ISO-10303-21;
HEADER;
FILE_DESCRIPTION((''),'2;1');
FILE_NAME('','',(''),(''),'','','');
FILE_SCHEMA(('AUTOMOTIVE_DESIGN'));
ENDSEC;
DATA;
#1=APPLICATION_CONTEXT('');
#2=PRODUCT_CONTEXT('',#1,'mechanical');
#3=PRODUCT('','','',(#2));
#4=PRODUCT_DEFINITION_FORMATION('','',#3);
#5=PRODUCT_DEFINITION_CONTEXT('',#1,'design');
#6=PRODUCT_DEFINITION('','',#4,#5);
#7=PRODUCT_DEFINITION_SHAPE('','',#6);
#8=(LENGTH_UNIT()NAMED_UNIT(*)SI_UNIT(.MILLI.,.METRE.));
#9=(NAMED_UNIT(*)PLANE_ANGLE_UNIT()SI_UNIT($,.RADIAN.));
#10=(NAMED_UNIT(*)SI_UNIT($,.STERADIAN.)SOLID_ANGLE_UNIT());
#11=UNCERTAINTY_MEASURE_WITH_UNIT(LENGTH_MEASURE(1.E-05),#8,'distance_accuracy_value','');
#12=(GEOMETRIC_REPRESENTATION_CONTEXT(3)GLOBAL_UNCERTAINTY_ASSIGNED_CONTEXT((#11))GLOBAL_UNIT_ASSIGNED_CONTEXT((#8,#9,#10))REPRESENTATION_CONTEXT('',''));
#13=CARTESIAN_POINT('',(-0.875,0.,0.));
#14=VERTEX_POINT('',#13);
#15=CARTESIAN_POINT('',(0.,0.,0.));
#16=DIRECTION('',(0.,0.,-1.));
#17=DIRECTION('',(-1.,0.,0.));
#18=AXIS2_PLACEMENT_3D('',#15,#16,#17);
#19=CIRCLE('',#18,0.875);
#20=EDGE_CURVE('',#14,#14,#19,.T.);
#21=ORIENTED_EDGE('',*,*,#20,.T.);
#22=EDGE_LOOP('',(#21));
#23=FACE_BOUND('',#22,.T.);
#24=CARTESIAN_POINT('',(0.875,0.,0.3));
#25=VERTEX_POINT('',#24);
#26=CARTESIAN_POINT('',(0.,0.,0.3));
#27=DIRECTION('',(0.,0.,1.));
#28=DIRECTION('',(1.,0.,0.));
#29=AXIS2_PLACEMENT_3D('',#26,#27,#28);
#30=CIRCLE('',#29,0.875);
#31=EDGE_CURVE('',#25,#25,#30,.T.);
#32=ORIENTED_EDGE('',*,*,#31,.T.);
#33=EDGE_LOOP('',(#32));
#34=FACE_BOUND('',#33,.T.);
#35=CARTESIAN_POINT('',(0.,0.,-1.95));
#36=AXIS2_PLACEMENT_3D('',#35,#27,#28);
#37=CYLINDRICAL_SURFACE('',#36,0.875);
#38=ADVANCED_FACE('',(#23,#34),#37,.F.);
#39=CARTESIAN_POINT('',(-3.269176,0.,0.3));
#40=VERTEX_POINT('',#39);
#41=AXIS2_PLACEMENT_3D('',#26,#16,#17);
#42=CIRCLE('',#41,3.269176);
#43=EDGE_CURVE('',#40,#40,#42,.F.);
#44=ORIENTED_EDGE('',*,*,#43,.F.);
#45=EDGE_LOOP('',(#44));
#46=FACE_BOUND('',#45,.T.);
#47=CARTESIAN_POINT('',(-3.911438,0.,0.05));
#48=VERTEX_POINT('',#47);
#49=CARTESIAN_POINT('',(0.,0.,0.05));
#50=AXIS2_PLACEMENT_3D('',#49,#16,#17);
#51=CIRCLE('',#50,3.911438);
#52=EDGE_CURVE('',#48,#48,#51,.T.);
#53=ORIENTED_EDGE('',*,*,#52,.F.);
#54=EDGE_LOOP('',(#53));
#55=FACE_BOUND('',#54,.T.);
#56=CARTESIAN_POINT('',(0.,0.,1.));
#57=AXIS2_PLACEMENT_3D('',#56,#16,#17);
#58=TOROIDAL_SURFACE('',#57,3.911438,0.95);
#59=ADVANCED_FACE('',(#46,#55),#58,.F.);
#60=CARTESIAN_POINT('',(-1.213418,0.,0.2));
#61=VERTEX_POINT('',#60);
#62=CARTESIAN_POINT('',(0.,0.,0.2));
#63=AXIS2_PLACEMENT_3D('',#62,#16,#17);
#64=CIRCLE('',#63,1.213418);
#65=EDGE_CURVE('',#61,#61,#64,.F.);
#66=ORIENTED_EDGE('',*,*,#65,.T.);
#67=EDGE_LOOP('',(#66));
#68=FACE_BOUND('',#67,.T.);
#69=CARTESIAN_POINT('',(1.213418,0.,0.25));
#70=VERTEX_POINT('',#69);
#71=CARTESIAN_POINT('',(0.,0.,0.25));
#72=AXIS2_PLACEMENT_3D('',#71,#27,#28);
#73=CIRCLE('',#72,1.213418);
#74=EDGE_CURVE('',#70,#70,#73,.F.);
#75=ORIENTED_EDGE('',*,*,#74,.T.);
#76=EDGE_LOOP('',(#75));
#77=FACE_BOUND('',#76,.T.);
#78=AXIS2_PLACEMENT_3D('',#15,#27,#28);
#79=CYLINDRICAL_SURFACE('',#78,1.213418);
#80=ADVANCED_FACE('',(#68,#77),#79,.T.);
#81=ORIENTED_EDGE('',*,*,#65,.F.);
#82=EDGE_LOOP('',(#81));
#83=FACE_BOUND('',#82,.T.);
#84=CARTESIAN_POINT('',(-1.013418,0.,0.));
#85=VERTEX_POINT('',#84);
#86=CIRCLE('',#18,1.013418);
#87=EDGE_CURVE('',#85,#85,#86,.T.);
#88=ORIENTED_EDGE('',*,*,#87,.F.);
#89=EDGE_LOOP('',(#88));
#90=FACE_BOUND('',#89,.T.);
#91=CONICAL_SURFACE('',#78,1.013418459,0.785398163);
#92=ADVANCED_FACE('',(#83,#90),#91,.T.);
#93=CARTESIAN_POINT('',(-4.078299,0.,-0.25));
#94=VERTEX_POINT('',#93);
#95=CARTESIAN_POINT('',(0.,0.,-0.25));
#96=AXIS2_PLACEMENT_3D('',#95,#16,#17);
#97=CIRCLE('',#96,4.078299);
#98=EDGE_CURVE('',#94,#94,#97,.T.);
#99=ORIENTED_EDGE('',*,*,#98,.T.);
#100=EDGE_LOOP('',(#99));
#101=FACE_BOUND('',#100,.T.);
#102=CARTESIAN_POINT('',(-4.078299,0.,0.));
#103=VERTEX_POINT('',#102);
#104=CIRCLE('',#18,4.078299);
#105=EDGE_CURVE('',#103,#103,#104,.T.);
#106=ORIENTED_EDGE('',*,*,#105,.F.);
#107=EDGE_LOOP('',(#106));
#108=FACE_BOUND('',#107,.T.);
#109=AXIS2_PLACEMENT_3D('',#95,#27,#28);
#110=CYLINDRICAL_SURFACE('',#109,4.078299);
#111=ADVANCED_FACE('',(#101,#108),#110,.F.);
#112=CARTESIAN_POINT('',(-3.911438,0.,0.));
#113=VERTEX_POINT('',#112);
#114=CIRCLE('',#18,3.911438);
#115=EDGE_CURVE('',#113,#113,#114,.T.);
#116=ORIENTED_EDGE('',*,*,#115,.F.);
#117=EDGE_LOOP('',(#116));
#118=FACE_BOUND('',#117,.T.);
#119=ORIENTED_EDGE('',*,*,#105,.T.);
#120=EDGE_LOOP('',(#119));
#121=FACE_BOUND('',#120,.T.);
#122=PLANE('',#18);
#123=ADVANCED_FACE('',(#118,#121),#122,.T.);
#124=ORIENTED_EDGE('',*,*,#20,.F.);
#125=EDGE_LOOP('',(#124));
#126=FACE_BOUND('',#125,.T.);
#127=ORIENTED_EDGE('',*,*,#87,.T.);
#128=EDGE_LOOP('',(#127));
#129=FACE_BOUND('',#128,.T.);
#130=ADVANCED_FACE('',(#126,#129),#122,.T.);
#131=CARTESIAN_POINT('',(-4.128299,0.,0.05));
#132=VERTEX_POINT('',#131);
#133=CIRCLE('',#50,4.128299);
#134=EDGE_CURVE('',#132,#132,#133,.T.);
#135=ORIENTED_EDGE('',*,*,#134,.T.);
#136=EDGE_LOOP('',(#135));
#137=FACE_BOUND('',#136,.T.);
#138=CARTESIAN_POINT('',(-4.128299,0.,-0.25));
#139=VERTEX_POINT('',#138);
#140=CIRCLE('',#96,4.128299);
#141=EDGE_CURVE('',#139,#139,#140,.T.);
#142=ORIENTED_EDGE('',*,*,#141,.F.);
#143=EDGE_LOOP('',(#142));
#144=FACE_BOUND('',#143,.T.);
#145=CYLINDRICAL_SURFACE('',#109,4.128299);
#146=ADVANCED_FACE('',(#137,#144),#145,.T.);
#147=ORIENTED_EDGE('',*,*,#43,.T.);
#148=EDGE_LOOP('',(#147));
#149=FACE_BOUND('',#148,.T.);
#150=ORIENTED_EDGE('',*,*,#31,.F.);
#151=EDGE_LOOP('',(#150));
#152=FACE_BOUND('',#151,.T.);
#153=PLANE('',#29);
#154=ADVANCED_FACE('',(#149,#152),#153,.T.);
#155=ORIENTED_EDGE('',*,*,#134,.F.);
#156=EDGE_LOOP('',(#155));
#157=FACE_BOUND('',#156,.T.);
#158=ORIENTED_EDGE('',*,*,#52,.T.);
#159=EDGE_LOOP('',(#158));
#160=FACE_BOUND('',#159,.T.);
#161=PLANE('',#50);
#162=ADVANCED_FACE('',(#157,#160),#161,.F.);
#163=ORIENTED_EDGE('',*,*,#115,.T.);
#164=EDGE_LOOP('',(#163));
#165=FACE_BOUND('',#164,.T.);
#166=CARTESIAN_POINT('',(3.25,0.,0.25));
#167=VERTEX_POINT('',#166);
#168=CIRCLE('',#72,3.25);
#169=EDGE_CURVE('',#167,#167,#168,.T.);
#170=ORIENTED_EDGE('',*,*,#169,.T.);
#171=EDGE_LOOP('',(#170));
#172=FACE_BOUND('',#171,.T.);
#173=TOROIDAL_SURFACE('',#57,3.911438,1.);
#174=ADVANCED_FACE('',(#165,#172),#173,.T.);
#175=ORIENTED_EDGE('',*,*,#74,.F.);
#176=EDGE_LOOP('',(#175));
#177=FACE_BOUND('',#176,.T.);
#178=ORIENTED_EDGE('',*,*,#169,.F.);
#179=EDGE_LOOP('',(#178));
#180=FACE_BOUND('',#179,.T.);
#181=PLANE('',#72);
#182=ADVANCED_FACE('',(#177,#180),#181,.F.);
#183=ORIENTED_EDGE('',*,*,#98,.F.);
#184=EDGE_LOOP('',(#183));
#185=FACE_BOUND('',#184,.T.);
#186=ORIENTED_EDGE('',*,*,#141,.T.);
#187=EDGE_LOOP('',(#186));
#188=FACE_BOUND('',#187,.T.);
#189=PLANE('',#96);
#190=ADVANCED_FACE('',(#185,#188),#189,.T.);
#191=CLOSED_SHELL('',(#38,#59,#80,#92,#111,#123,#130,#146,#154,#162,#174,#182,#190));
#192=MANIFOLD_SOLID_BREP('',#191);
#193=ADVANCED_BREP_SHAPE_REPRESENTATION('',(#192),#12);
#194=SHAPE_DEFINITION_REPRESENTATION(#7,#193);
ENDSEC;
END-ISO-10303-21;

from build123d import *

# Parameters (mm, degrees)
SKETCH1_R           = 3.25
SKETCH1_R_2         = 0.875
BOSS_EXTRUDE1_DEPTH = 0.25
SKETCH2_R           = 4.078298916
BOSS_EXTRUDE2_DEPTH = 0.25
FILLET1_R           = 1
SHELL1_T            = 0.05
CUT_EXTRUDE1_START  = -2.25
SKETCH3_R           = 0.875
CUT_EXTRUDE1_DEPTH  = 2.25
BOSS_EXTRUDE3_START = 0.25
SKETCH4_R           = 1.213418459
SKETCH4_R_2         = 0.875
BOSS_EXTRUDE3_DEPTH = 0.25
CHAMFER1_SIZE       = 0.2


with BuildPart() as part:
    # Sketch1 → Boss-Extrude1 (new body)
    with BuildSketch(Plane.XY):
        Circle(SKETCH1_R)
        Circle(SKETCH1_R_2, mode=Mode.SUBTRACT)
    extrude(amount=BOSS_EXTRUDE1_DEPTH)

    # Sketch2 → Boss-Extrude2 (add)
    with BuildSketch(Plane(origin=(0, 0, 0), x_dir=(-1, 0, 0), z_dir=(0, 0, -1))):
        Circle(SKETCH2_R)
    extrude(amount=BOSS_EXTRUDE2_DEPTH)

    # Fillet1
    # the kernel refuses this fillet: 1 mm, written as the material it adds along each edge
    with BuildSketch(Plane(origin=(0, 0, 0), x_dir=(1, 0, 0), z_dir=(0, -1, 0))) as fillet1_piece_1:
        with BuildLine():
            CenterArc((3.911437828, 1), FILLET1_R, 228.590377891, 41.409622109)
            Line((3.25, 0.25), (3.25, 0))
            Line((3.25, 0), (3.911437828, 0))
        make_face()
    revolve(axis=Axis((0, 0, 0), (0, 0, 1)))

    # Shell1
    shell1_openings = [part.faces().sort_by_distance(p)[0] for p in [
        (0, 0, -0.25),
    ]]
    offset(amount=SHELL1_T, openings=shell1_openings, kind=Kind.INTERSECTION)

    # Sketch3 → Cut-Extrude1 (cut)
    with BuildSketch(Plane.XY.offset(0.3).offset(CUT_EXTRUDE1_START)):
        Circle(SKETCH3_R)
    extrude(amount=CUT_EXTRUDE1_DEPTH, mode=Mode.SUBTRACT)

    # Sketch4 → Boss-Extrude3 (add)
    with BuildSketch(Plane(origin=(0, 0, 0.25), x_dir=(-1, 0, 0), z_dir=(0, 0, -1)).offset(BOSS_EXTRUDE3_START)):
        with Locations(Location((0, 0, 0), (0, 0, 180))):
            Circle(SKETCH4_R)
        with Locations(Location((0, 0, 0), (0, 0, 180))):
            Circle(SKETCH4_R_2, mode=Mode.SUBTRACT)
    extrude(amount=-BOSS_EXTRUDE3_DEPTH)

    # Chamfer1
    chamfer1_edges = [part.edges().sort_by_distance(p)[0] for p in [
        (-1.213418459, 0, 0),
    ]]
    chamfer(chamfer1_edges, length=CHAMFER1_SIZE)


solid = part.part
